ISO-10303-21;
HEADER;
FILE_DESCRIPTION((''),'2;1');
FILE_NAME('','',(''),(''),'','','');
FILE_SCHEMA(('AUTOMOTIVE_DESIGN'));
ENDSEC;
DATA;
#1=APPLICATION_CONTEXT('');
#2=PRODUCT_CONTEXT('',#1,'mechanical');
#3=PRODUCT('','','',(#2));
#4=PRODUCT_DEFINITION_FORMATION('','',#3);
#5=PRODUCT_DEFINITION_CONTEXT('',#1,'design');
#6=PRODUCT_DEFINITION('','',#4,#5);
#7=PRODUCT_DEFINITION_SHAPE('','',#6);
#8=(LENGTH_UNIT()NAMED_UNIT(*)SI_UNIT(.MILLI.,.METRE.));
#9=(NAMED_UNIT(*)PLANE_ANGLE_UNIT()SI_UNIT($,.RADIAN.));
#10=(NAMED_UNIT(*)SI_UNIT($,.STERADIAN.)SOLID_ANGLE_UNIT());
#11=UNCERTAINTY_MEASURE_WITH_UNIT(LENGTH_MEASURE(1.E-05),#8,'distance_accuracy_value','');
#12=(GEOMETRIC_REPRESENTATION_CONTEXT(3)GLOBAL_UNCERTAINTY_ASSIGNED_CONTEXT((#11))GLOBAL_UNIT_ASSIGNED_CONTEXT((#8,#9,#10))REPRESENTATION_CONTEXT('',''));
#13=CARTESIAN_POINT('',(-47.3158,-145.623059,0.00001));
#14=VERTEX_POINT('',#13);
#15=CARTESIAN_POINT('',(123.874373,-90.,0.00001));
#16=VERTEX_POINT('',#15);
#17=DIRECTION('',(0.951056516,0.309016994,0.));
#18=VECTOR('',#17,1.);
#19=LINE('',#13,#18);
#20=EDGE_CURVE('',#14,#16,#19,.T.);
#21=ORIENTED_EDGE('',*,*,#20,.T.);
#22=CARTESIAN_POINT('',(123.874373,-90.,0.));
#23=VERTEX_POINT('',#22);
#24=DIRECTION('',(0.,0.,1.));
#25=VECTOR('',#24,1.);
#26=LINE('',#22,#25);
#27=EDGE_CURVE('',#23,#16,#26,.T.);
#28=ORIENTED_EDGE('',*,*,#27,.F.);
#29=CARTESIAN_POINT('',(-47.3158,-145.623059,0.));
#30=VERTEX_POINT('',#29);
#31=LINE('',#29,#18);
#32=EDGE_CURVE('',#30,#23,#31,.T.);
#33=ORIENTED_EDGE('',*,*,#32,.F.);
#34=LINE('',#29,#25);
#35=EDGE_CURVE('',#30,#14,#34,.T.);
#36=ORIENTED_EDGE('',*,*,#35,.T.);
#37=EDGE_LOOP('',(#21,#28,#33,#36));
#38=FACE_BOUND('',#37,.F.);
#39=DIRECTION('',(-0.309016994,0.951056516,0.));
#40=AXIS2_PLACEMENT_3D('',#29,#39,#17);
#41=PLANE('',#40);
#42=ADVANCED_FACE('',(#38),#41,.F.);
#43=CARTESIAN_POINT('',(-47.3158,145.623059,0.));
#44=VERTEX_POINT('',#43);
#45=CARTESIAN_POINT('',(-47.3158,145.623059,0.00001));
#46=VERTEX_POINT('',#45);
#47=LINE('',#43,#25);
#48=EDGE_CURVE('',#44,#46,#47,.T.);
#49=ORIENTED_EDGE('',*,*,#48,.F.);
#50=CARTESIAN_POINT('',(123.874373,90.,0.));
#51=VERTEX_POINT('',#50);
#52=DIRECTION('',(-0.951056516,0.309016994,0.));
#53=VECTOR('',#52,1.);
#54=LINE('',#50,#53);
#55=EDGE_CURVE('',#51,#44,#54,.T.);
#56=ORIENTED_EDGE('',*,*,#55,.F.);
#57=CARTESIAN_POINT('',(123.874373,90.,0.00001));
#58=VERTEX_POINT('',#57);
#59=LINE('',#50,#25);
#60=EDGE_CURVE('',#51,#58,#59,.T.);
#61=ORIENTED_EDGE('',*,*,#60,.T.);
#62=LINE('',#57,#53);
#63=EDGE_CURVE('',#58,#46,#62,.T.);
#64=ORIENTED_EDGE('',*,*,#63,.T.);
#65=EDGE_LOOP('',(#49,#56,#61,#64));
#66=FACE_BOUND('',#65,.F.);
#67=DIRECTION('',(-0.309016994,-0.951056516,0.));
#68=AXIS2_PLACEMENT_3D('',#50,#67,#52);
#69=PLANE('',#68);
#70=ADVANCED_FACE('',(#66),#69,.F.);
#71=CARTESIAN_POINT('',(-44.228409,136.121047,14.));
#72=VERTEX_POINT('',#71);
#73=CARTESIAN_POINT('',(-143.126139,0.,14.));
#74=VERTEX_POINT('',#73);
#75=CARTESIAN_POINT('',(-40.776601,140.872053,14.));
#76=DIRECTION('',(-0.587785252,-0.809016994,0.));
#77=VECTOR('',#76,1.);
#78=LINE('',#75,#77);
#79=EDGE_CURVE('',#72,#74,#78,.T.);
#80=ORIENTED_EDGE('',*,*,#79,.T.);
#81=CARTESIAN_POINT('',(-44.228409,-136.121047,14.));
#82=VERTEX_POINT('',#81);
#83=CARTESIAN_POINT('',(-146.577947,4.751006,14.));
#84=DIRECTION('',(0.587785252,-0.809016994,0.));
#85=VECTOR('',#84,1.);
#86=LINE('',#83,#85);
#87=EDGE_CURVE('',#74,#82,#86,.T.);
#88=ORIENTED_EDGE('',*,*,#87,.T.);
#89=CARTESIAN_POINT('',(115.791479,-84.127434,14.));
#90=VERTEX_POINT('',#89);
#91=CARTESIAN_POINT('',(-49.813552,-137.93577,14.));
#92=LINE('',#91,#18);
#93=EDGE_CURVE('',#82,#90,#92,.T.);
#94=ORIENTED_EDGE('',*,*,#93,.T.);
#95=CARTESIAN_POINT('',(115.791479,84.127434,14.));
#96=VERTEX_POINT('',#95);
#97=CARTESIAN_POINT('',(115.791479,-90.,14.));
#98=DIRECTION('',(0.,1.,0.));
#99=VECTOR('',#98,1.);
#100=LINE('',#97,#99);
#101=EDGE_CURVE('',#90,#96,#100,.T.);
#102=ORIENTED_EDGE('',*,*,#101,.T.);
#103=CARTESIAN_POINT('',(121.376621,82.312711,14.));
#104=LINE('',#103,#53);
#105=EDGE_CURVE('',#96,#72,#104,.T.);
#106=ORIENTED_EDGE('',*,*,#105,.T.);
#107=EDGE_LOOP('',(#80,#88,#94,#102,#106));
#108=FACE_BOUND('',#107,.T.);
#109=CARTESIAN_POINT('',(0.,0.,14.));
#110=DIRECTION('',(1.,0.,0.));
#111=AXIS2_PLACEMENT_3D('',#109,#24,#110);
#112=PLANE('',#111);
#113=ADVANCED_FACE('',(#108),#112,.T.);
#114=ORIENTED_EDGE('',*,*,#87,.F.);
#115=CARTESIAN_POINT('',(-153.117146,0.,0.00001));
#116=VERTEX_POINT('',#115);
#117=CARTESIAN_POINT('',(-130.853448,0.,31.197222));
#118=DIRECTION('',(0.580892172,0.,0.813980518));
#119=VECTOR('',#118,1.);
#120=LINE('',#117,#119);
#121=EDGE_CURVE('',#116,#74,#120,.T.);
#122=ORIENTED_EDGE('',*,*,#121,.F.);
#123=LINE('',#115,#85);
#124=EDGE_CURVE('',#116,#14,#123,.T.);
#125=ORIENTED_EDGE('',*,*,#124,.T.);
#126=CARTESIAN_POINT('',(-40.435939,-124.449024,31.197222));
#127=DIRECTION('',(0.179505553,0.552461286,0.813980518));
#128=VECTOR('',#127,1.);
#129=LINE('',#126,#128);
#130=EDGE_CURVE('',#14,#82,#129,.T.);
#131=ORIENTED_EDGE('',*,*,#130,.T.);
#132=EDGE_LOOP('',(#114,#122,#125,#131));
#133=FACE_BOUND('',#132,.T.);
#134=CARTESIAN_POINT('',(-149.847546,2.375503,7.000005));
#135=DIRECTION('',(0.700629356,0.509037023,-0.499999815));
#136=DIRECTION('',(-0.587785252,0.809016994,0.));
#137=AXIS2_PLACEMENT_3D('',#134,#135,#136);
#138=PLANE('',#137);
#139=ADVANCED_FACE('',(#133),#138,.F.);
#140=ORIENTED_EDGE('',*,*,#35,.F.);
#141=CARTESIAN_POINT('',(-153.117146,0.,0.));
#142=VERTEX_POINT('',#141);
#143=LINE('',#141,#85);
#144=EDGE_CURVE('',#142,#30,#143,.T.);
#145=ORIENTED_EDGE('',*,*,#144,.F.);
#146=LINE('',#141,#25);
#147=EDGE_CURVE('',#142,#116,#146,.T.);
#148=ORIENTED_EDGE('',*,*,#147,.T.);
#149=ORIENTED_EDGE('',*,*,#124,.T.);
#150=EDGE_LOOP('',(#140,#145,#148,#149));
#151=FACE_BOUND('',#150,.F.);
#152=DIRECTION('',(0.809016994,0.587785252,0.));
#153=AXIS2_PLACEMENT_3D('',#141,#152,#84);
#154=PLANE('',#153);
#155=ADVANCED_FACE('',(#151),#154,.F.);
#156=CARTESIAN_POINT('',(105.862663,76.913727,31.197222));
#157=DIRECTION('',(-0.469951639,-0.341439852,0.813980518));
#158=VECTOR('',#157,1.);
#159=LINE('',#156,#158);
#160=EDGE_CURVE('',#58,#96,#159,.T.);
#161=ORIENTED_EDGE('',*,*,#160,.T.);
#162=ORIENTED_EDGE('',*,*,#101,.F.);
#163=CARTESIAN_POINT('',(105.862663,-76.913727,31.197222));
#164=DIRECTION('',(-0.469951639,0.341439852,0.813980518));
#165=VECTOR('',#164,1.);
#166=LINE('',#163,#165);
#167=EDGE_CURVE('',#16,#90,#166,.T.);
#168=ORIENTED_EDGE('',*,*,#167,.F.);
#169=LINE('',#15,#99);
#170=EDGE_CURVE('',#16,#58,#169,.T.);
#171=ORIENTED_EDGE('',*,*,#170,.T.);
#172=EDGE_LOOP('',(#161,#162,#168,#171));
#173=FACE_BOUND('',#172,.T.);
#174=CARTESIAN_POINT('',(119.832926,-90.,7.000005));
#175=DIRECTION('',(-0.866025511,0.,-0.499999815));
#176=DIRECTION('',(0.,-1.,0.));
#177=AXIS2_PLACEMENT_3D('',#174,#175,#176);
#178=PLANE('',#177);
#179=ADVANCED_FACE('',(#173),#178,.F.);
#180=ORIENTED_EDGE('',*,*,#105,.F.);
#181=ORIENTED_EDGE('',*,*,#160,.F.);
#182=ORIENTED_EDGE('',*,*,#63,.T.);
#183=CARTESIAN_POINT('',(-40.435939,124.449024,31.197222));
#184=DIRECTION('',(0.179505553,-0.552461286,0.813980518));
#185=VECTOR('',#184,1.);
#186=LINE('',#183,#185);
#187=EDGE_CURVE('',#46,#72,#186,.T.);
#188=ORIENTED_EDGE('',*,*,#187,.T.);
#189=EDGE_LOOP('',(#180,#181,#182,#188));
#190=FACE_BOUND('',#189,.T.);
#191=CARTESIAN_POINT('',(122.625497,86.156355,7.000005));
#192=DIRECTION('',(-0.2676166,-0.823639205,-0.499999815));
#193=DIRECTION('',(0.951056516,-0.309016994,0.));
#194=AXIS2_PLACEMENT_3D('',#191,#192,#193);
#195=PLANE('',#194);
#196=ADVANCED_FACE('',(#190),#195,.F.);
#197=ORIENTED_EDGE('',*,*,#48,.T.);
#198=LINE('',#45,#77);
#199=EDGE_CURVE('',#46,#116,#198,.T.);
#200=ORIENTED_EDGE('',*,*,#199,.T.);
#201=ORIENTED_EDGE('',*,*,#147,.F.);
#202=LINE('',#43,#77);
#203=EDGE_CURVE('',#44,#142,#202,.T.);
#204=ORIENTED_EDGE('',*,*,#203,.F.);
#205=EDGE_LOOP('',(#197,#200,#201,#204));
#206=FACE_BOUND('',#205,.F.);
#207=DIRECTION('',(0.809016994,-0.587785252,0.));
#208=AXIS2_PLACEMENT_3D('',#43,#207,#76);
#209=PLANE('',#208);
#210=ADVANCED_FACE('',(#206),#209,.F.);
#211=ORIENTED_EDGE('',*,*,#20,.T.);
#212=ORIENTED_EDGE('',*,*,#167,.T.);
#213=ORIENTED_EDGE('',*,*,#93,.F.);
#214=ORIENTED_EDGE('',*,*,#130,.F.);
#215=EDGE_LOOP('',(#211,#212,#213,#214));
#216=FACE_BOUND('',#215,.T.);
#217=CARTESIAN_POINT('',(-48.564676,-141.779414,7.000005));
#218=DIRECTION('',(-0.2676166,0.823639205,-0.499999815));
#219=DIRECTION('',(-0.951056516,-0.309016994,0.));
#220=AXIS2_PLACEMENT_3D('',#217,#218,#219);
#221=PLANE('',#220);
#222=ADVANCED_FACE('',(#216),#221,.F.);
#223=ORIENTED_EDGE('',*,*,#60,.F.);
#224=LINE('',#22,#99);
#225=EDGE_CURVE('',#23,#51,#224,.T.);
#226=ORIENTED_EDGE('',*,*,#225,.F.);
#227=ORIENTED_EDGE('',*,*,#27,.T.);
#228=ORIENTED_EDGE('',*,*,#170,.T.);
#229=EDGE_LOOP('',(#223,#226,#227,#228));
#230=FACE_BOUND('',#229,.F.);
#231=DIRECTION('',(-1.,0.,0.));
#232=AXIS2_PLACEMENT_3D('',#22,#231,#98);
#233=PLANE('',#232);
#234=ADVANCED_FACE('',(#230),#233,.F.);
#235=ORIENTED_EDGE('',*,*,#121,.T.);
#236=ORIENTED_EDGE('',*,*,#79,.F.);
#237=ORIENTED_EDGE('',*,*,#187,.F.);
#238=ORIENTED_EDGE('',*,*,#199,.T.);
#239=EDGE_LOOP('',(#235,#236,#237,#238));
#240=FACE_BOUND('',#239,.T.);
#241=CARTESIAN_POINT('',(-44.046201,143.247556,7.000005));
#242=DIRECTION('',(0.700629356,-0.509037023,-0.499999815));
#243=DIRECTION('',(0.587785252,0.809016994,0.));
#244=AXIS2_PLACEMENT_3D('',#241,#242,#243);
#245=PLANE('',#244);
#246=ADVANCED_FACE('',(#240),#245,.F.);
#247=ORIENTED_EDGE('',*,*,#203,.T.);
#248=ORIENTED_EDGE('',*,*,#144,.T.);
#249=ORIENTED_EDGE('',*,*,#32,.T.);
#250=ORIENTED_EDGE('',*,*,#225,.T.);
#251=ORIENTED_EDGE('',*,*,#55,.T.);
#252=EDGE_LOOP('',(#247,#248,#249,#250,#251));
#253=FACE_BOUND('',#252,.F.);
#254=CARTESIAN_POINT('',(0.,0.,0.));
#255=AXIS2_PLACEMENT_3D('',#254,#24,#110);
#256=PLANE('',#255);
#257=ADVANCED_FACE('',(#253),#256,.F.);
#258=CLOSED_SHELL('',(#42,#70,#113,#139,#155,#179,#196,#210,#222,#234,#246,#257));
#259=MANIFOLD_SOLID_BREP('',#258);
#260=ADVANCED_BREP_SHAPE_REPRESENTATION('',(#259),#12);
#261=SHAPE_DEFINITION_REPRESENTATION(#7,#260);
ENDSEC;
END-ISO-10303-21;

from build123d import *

# Parameters (mm, degrees)
F1_DEPTH = 14
F2_SIZE2 = 8.082894
F2_SIZE  = 13.99999


# Not quite as in the source:
# - a fillet or chamfer is up to 0.001 mm smaller than in the source, because OpenCascade refuses the exact size


with BuildPart() as f1:
    # F0 (on Top) → F1 (new body)
    with BuildSketch(Plane.XY):
        Polygon((123.8743728424, -90), (123.8743728424, 90), (-47.3158000907, 145.6230589875), (-153.1171455034, 0), (-47.3158000907, -145.6230589875), align=None)
    extrude(amount=F1_DEPTH)

    # F2 (size 14 and 8.0829037687 in the source; OpenCascade refuses exactly that, so slightly less here)
    f2_edges = [f1.edges().sort_by_distance(p)[0] for p in [
        (38.279286, -117.811529, 14),
        (123.874373, 0, 14),
        (38.279286, 117.811529, 14),
        (-100.216473, 72.811529, 14),
        (-100.216473, -72.811529, 14),
    ]]
    chamfer(f2_edges, length=F2_SIZE, length2=F2_SIZE2)


with BuildPart() as f3_1:
    # F3: copy of F1
    add(f1.part)


with BuildPart() as f5_1:
    # F5: copy of F1
    add(f1.part.moved(Location((14, 14, 14))))


solid = f1.part
